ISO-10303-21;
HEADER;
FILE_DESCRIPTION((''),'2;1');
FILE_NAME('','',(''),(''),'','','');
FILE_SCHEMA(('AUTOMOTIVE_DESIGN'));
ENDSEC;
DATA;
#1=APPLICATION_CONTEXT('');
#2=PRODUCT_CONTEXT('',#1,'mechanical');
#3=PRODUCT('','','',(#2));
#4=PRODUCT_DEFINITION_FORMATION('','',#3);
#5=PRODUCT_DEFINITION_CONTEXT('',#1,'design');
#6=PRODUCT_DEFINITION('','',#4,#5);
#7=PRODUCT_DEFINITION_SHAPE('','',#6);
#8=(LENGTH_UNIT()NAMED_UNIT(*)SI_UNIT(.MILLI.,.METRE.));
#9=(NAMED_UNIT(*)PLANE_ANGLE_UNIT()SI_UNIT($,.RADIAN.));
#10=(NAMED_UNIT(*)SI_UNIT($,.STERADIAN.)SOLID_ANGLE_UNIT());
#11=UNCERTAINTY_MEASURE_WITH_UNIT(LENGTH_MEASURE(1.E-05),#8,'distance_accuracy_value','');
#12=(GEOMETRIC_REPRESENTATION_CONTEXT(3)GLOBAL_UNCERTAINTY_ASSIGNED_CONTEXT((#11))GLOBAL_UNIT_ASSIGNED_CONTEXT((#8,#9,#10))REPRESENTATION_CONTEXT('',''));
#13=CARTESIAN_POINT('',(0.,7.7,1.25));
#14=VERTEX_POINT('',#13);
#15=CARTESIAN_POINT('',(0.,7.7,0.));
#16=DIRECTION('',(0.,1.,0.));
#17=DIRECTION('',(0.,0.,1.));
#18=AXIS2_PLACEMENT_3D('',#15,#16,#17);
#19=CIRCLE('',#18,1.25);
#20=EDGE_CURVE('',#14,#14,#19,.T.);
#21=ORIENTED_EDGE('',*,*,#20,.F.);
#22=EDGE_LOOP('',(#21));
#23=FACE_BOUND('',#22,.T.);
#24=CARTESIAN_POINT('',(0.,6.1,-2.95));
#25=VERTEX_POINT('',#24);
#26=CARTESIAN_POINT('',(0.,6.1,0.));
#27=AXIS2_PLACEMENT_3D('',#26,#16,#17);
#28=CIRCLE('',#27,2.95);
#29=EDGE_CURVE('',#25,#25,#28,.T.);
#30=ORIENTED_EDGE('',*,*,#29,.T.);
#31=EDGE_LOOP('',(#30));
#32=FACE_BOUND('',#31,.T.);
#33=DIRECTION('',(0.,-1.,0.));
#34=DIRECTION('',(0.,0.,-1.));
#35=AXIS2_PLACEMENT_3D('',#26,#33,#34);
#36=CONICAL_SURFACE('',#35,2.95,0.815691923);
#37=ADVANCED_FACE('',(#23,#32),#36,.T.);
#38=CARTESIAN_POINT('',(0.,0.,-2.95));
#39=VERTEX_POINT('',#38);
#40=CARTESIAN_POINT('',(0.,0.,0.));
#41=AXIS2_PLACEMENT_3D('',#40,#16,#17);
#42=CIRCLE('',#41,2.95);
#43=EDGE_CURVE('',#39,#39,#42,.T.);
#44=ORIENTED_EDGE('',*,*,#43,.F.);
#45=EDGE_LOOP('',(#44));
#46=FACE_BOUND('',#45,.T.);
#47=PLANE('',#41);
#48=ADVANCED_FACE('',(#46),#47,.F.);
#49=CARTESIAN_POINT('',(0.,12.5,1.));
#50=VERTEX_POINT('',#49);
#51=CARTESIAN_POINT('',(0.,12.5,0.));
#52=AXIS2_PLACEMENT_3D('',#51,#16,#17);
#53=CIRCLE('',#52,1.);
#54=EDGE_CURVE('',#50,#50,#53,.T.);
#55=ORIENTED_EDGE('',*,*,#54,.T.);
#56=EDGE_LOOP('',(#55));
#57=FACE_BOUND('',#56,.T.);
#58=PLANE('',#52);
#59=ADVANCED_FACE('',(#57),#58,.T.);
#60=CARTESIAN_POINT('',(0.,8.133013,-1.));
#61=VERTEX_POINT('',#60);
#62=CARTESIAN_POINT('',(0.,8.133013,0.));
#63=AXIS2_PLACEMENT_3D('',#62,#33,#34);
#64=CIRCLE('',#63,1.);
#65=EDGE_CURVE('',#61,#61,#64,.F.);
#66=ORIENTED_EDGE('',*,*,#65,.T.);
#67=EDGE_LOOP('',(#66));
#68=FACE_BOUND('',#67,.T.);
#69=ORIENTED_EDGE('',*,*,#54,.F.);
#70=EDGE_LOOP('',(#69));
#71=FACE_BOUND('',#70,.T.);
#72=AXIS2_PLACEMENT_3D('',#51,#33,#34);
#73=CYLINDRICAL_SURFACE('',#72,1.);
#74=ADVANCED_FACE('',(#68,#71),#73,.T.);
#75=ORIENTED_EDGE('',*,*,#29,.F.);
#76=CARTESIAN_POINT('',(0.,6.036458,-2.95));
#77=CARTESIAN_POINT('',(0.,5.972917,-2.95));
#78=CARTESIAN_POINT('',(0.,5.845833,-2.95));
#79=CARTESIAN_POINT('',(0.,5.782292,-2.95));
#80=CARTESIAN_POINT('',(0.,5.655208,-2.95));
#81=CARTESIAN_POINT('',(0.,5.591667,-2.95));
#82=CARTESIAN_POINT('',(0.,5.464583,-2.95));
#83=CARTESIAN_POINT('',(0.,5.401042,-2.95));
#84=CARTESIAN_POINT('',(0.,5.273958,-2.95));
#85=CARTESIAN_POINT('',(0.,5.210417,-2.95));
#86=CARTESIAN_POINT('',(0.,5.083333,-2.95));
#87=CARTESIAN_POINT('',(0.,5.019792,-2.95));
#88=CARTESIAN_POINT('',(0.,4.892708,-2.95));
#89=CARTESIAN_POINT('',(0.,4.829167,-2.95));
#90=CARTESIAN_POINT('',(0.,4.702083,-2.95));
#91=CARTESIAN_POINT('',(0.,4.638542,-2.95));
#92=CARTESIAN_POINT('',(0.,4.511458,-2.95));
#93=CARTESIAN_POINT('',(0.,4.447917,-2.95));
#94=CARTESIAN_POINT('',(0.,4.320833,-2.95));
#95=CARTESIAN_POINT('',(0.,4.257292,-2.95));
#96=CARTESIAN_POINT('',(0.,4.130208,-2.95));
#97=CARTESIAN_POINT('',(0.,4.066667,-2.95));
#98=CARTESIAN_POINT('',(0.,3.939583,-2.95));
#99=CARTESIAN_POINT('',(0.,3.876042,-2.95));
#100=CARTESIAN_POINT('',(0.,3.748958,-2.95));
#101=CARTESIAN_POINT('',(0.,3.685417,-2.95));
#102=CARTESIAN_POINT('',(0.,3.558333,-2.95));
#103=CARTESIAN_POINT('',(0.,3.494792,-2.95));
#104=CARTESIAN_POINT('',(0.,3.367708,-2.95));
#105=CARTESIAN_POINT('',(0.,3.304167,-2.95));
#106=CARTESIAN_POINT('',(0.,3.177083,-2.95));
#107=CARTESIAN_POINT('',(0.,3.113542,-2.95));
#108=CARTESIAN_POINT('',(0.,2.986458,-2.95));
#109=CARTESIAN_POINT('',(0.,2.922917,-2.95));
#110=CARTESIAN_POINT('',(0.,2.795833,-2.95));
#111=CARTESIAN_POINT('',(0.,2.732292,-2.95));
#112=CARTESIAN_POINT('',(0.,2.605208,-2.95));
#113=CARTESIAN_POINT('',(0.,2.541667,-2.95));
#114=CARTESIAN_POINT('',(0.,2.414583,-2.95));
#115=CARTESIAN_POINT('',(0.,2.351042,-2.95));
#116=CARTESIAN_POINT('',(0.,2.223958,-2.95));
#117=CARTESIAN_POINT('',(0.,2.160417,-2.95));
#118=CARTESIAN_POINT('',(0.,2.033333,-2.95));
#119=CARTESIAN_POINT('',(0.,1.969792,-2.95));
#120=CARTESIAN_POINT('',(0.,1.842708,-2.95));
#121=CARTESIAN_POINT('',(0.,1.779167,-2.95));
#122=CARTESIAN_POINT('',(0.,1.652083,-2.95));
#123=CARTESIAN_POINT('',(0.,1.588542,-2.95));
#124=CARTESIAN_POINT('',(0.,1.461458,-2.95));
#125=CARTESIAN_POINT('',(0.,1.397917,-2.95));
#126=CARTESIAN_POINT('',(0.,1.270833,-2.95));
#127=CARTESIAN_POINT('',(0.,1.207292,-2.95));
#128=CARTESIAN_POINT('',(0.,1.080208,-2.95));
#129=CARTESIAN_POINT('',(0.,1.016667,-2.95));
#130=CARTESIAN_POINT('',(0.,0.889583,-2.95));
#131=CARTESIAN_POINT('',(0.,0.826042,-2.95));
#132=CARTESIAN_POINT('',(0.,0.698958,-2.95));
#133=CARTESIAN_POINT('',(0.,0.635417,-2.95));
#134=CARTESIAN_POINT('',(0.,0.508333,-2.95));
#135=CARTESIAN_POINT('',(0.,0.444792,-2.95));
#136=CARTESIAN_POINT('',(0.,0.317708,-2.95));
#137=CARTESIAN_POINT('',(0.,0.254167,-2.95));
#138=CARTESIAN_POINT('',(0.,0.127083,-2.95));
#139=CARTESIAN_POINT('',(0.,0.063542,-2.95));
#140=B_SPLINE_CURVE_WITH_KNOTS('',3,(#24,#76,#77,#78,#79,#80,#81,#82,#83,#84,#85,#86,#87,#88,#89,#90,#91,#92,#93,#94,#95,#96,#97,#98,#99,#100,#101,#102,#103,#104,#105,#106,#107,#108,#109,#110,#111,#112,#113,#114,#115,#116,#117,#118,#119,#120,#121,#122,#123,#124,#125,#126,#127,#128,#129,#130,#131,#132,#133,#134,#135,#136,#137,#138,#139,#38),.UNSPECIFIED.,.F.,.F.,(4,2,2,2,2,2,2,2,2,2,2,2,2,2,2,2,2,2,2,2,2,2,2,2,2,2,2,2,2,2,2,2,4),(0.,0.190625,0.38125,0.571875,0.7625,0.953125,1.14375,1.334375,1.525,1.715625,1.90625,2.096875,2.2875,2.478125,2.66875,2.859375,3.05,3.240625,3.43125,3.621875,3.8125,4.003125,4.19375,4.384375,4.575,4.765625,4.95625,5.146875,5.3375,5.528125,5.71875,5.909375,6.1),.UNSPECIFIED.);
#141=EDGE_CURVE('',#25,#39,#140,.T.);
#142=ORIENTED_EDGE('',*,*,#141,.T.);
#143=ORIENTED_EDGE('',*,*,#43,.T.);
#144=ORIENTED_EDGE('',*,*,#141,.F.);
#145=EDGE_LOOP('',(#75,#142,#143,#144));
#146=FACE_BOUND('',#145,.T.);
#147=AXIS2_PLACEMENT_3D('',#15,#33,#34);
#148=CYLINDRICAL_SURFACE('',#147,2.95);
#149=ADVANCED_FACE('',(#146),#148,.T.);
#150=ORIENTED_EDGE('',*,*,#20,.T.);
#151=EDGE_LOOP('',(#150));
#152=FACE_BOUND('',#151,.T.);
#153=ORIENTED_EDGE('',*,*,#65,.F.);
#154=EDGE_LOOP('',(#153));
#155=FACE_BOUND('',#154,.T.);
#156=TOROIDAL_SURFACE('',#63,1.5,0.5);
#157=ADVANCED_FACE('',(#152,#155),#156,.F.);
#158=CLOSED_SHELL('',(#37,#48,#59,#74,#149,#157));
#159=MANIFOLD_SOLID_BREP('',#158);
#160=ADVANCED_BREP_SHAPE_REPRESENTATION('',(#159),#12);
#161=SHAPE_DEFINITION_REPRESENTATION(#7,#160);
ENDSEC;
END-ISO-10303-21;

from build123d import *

# Parameters (mm, degrees)
SKETCH1_R           = 2.95
BOSS_EXTRUDE1_DEPTH = 7.7
SKETCH3_R           = 1
BOSS_EXTRUDE2_DEPTH = 4.8
FILLET1_R           = 0.5


with BuildPart() as part:
    # Sketch1 → Boss-Extrude1 (new body)
    with BuildSketch(Plane(origin=(0, 0, 0), x_dir=(1, 0, 0), z_dir=(0, 1, 0))):
        with Locations(Location((0, 0, 0), (0, 0, 90))):
            Circle(SKETCH1_R)
    extrude(amount=BOSS_EXTRUDE1_DEPTH)

    # Sketch2 → Cut-Revolve1 (revolve, cut)
    with BuildSketch(Plane.XY, mode=Mode.PRIVATE) as cut_revolve1_sk:
        Polygon((-2.95, 6.1), (-1.25, 7.7), (-2.95, 7.7), align=None)
    revolve(cut_revolve1_sk.sketch.rotate(Axis((0, 7.7, 0), (0, -1, 0)), 90), axis=Axis((0, 7.7, 0), (0, -1, 0)), mode=Mode.SUBTRACT)

    # Sketch3 → Boss-Extrude2 (add)
    with BuildSketch(Plane(origin=(0, 7.7, 0), x_dir=(1, 0, 0), z_dir=(0, 1, 0))):
        with Locations(Location((0, 0, 0), (0, 0, 270))):
            Circle(SKETCH3_R)
    extrude(amount=BOSS_EXTRUDE2_DEPTH)

    # Fillet1
    # the kernel refuses this fillet: 0.5 mm, written as the material it adds along each edge
    with BuildSketch(Plane(origin=(0, 7.7, 0), x_dir=(0, 0, 1), z_dir=(-1, 0, 0))) as fillet1_piece_1:
        with BuildLine():
            CenterArc((1.5, 0.433012702), FILLET1_R, 180, 60)
            Line((1, 0.433012702), (0.99, 0.433012702))
            Line((0.99, 0.433012702), (0.99, 0))
            Line((0.99, 0), (1, -0.01))
            ThreePointArc((1, -0.01), (1.125, -0.01), (1.245, -0.008660254))
            Line((1.245, -0.008660254), (1.25, 0))
        make_face()
    revolve(axis=Axis((0, 7.7, 0), (0, 1, 0)))


solid = part.part
